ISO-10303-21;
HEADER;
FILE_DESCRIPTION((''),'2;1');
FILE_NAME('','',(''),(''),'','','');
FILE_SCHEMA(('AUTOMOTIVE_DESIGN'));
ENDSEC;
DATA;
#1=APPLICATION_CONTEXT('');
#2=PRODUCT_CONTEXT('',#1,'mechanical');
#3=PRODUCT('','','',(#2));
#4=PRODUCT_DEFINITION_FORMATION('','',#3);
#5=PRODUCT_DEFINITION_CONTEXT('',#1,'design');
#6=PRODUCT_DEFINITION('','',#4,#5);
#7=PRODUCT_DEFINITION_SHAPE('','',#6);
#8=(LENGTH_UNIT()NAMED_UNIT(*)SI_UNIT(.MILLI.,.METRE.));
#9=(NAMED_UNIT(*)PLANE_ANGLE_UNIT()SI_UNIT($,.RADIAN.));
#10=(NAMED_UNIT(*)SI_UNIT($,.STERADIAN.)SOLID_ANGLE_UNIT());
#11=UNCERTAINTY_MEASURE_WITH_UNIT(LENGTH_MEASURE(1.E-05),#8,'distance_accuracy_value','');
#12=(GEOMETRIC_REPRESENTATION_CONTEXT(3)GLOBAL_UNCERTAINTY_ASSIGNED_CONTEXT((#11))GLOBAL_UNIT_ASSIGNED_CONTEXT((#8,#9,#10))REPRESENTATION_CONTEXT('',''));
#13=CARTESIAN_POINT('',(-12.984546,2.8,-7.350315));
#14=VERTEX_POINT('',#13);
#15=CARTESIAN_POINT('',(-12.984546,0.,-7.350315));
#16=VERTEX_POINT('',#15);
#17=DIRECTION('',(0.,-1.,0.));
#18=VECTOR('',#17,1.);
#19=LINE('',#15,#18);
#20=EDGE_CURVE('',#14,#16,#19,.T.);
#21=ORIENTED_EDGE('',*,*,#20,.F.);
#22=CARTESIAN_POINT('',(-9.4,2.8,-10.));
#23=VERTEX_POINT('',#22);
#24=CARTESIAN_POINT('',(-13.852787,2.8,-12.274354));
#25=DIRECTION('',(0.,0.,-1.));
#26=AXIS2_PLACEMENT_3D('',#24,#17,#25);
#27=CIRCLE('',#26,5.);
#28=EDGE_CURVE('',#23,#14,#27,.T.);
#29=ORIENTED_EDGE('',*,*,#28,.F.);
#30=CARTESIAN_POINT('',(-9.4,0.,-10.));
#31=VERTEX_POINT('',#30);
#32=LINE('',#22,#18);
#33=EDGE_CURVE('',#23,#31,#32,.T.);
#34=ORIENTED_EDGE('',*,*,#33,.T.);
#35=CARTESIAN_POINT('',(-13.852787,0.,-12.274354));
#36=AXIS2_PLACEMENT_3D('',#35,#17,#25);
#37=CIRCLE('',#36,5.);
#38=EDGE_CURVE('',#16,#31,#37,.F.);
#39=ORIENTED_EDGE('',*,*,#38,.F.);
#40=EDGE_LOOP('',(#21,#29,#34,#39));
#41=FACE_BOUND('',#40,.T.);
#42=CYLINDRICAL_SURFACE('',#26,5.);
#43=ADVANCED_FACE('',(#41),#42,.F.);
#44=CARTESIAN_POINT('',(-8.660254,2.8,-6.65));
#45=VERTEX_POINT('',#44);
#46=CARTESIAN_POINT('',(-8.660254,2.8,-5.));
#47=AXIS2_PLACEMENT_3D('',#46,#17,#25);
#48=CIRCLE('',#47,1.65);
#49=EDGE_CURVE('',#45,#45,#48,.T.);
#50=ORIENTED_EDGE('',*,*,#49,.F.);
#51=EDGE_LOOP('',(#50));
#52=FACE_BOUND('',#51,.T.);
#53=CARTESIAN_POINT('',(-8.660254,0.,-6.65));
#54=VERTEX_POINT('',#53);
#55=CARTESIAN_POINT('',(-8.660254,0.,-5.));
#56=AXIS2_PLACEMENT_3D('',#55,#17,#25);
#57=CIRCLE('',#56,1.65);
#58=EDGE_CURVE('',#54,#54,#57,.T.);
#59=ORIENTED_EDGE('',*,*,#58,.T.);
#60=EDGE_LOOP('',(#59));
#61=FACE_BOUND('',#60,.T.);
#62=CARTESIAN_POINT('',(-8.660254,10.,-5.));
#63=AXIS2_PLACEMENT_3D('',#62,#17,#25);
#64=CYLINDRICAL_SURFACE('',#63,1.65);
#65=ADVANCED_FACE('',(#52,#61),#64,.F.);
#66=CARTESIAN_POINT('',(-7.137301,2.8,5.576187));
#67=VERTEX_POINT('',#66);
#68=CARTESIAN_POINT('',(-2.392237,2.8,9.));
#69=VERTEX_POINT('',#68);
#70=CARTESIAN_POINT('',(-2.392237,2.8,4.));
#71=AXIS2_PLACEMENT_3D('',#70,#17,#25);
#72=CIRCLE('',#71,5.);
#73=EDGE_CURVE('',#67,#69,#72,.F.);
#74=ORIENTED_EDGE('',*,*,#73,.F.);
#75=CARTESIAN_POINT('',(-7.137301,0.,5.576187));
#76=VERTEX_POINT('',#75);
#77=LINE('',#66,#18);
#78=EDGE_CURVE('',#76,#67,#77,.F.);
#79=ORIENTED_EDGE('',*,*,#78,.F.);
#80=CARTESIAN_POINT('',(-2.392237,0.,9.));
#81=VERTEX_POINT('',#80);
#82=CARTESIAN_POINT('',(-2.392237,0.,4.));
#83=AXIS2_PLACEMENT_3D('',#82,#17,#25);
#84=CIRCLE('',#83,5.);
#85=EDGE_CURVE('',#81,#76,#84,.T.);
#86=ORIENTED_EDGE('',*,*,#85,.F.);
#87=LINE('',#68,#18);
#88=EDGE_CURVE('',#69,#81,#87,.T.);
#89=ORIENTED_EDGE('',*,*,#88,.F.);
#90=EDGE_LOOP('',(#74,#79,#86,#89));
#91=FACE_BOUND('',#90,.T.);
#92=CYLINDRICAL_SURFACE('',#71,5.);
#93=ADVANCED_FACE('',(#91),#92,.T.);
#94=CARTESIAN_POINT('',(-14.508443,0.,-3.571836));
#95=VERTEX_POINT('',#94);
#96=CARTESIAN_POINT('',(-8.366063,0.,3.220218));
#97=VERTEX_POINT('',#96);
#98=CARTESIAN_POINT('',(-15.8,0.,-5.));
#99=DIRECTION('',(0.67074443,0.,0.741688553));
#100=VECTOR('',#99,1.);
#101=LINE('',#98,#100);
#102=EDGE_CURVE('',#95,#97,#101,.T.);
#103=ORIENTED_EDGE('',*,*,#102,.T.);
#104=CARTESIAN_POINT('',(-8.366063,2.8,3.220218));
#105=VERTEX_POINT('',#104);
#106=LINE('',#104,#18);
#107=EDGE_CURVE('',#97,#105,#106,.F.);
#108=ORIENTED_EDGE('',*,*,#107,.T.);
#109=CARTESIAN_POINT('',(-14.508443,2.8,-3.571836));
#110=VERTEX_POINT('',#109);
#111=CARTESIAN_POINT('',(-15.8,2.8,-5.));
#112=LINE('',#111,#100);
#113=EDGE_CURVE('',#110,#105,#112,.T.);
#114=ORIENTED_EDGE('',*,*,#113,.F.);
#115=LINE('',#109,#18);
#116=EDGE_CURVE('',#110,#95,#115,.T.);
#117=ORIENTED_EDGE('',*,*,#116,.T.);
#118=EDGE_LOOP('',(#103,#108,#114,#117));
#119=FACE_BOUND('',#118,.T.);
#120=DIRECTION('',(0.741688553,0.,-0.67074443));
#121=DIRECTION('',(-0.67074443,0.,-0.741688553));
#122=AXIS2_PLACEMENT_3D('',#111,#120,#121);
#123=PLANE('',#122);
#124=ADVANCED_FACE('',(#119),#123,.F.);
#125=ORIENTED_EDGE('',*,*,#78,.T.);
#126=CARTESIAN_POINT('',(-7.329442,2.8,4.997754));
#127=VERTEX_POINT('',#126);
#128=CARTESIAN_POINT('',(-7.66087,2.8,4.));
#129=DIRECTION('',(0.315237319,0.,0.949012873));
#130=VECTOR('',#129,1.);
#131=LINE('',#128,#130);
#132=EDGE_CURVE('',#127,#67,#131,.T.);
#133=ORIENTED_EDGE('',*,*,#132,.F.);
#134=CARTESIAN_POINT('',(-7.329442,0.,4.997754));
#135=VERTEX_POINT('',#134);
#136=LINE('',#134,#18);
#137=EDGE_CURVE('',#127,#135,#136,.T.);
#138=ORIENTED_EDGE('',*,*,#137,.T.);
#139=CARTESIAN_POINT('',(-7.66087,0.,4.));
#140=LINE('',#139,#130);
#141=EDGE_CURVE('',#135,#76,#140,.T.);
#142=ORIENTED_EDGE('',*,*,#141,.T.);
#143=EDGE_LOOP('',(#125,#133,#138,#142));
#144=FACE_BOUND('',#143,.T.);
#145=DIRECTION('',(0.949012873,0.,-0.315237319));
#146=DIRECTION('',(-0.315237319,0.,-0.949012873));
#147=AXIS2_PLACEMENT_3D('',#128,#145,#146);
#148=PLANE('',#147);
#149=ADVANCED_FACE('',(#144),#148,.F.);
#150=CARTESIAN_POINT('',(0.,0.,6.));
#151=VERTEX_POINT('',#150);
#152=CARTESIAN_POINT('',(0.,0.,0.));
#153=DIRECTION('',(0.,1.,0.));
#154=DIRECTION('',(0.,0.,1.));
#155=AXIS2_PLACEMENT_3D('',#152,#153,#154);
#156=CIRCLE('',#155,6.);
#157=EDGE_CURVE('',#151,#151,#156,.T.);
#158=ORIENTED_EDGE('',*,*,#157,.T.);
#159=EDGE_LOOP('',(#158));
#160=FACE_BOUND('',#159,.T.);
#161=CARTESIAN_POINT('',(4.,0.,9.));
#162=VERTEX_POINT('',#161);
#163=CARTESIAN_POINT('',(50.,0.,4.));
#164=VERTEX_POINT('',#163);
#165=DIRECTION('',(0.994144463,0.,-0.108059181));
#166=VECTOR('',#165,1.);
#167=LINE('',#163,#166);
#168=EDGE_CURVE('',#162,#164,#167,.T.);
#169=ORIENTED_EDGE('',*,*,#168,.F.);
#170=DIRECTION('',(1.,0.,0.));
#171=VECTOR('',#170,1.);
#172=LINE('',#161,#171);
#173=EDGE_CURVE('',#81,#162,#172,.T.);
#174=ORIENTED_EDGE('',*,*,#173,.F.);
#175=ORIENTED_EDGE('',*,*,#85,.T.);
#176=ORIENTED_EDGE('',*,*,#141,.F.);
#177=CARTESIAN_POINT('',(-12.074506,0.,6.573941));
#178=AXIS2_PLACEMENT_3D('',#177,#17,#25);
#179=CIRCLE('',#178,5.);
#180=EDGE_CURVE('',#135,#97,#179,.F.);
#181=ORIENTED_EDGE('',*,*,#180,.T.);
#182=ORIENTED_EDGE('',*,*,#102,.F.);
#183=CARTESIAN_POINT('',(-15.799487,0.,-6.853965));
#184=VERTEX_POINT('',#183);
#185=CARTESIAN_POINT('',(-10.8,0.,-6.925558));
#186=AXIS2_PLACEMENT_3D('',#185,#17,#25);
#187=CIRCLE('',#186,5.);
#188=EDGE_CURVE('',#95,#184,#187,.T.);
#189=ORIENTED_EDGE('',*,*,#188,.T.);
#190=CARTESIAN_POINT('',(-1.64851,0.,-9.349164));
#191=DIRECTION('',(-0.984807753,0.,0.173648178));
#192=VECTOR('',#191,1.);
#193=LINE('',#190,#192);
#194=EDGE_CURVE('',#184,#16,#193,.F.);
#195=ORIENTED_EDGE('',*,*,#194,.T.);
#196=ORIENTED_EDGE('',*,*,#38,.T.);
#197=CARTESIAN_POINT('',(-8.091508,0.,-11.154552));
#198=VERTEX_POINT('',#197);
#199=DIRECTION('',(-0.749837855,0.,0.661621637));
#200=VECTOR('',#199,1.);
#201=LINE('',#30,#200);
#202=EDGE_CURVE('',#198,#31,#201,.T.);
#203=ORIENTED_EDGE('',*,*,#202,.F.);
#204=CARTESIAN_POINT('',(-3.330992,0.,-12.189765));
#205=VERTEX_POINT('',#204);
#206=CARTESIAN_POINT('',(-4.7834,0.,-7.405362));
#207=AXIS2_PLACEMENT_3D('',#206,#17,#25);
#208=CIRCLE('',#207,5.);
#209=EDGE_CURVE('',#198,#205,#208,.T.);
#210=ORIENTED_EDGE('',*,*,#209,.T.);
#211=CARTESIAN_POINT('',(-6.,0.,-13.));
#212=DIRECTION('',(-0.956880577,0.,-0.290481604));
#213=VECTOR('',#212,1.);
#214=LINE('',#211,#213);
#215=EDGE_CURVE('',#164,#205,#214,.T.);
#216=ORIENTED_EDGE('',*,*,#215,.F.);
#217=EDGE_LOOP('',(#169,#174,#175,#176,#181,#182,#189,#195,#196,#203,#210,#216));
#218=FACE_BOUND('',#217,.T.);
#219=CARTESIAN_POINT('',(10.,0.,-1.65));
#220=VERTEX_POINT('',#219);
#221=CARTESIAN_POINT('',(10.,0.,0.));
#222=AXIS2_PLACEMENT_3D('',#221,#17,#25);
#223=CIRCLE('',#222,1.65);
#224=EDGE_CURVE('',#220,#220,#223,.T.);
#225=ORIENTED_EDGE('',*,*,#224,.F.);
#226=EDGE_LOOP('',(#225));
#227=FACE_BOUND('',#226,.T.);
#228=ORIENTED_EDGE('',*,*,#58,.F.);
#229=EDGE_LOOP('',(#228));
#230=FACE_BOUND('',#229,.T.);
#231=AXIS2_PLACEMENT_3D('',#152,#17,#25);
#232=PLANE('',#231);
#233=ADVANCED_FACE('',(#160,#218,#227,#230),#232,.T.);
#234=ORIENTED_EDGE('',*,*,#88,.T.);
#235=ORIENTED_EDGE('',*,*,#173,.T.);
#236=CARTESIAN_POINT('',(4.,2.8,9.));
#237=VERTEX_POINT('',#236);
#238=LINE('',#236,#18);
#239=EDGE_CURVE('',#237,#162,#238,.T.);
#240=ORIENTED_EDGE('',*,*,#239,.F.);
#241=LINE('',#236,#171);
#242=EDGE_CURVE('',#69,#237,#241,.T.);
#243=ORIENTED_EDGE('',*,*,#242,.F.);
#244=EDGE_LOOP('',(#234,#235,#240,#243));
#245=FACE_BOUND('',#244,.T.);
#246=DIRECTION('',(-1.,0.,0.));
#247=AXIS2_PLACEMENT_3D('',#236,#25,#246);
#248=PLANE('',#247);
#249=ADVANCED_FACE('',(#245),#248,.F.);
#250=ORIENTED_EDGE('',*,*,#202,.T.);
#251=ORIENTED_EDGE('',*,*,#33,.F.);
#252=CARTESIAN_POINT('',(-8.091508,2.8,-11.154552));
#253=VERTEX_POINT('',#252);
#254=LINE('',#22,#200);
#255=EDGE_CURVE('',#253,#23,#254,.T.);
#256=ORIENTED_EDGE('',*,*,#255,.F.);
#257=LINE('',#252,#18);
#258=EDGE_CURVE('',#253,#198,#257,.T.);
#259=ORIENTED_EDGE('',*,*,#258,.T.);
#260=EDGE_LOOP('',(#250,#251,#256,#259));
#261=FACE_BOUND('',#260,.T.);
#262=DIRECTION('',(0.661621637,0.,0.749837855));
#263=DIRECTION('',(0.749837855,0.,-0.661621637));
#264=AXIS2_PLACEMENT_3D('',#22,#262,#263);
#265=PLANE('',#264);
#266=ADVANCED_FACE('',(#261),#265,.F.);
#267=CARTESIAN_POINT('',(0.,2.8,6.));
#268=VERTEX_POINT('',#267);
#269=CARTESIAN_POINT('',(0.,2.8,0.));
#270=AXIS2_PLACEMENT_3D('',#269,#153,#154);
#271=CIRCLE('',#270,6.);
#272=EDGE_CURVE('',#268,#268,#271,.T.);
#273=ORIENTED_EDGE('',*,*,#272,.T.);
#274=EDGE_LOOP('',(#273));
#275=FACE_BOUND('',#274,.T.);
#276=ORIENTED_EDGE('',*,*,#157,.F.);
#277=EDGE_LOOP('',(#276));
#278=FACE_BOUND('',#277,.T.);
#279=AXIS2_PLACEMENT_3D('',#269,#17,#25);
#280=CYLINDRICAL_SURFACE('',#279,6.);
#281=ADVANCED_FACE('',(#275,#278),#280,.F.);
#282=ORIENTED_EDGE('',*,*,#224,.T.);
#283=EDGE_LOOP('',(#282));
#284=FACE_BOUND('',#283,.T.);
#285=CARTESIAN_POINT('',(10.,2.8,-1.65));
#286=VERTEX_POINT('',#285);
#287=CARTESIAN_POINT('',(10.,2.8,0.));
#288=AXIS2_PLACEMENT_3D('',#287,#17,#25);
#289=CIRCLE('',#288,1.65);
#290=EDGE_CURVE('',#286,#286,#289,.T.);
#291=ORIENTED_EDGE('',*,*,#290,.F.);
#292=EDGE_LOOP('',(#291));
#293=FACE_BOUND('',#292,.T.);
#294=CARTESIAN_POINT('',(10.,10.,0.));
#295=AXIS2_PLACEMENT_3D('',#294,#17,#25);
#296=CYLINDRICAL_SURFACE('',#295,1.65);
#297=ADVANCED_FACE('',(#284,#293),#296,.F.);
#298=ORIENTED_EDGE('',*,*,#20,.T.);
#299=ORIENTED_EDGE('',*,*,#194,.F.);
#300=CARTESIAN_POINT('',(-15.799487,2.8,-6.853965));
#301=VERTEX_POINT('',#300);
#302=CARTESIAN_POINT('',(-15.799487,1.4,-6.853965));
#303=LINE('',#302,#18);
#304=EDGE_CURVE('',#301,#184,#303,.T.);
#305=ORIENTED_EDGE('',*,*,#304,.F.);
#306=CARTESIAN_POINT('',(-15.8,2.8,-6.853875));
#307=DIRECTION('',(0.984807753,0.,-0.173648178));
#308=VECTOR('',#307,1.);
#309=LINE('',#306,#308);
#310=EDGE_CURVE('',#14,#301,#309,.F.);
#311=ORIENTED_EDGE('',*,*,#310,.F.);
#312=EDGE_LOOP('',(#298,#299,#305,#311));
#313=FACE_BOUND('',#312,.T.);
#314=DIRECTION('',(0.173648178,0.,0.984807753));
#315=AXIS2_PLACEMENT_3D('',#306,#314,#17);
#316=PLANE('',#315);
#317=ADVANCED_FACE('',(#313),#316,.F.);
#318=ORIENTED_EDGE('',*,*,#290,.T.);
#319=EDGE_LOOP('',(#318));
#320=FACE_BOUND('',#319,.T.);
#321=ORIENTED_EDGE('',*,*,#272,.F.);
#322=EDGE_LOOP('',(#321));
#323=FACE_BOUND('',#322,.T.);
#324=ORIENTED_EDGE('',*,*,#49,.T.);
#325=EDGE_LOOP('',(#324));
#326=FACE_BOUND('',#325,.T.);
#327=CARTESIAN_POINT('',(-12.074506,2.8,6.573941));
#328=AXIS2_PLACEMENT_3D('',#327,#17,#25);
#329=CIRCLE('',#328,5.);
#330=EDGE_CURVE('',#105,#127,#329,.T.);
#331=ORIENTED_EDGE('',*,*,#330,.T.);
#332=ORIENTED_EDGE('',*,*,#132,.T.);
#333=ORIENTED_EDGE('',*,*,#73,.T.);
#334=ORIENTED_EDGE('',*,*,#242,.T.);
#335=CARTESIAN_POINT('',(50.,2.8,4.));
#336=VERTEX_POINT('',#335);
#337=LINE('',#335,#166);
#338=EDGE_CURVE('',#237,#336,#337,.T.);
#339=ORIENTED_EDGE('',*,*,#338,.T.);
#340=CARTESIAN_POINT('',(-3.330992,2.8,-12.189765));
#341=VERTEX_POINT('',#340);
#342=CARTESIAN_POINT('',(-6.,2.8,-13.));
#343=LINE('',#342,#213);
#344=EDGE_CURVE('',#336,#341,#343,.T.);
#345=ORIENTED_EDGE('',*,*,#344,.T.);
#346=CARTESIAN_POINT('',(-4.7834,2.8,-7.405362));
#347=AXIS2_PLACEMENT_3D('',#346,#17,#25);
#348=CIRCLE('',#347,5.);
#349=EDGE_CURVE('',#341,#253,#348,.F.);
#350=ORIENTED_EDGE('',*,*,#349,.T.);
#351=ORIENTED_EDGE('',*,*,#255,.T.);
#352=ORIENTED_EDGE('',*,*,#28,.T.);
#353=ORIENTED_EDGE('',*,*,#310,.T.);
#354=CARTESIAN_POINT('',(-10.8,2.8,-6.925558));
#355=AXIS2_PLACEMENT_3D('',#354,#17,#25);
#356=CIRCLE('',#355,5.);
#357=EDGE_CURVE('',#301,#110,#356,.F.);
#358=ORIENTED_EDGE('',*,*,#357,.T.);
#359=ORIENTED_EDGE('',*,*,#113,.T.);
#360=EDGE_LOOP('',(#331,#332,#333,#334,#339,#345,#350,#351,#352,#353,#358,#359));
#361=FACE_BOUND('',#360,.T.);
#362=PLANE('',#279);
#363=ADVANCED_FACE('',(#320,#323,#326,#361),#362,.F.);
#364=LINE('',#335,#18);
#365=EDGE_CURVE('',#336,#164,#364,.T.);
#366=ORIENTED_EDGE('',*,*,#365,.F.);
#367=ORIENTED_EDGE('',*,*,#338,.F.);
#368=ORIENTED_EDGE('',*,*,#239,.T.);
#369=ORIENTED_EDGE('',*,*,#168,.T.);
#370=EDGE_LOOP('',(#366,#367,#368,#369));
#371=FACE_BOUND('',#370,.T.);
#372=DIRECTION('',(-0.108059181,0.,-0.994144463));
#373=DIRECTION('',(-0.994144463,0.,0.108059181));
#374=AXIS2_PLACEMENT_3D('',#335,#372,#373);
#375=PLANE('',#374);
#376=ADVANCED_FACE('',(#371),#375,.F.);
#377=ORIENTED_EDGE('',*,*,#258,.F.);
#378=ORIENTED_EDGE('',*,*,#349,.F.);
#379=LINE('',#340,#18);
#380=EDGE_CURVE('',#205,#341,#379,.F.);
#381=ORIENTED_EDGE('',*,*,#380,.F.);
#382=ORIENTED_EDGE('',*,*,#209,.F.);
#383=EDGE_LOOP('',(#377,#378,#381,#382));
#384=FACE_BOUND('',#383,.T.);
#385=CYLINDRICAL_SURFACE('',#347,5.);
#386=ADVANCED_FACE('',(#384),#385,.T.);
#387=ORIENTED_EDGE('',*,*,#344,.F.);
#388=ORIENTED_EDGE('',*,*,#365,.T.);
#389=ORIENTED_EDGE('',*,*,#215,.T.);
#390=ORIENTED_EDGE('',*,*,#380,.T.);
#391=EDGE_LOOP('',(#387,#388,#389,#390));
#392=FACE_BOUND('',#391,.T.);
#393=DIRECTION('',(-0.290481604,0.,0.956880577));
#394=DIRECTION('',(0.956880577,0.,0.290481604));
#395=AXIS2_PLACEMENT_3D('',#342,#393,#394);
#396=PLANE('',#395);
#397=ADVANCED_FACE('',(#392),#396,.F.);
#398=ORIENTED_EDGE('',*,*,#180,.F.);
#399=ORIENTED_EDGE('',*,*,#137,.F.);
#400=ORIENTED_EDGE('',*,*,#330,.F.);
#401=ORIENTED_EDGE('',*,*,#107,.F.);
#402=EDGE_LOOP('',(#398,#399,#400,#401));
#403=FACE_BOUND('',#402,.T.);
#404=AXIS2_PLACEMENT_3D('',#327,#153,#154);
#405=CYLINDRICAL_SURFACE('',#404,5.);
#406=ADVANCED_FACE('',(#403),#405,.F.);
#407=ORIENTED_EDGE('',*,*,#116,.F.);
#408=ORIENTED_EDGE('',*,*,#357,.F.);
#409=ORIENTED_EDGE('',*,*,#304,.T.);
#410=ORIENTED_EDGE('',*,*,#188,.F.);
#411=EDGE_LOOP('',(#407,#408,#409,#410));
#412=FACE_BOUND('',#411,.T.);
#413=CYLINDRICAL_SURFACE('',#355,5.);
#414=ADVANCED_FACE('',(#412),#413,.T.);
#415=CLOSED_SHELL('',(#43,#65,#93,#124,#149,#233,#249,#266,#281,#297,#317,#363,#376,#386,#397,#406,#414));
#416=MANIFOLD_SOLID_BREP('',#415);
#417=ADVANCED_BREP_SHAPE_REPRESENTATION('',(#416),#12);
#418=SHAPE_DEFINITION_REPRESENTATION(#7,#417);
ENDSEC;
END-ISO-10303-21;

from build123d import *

# Parameters (mm, degrees)
SKETCH1_R           = 6
BOSS_EXTRUDE3_DEPTH = 2.8
FILLET1_R           = 5
SKETCH5_R           = 1.65
CUT_EXTRUDE2_DEPTH  = 10
CHAMFER1_SIZE       = 6.5
CHAMFER1_SIZE_2     = 1.146125375
FILLET2_R           = 5


with BuildPart() as part:
    # Sketch1 → Boss-Extrude3 (new body)
    with BuildSketch(Plane(origin=(0, 0, 0), x_dir=(1, 0, 0), z_dir=(0, 1, 0))):
        Polygon((-9.4, 10), (-6, 13), (50, -4), (4, -9), (-6, -9), (-7.660869565, -4), (-15.8, 5), (-15.8, 8), (-9.4, 8), align=None)
        with Locations(Location((0, 0, 0), (0, 0, 270))):
            Circle(SKETCH1_R, mode=Mode.SUBTRACT)
    extrude(amount=BOSS_EXTRUDE3_DEPTH)

    # Fillet1
    fillet1_edges = [part.edges().sort_by_distance(p)[0] for p in [
        (-6, 1.4, -13),
        (-6, 1.4, 9),
        (-7.660869565, 1.4, 4),
        (-15.8, 1.4, -5),
    ]]
    fillet(fillet1_edges, radius=FILLET1_R)

    # Sketch5 → Cut-Extrude2 (cut)
    with BuildSketch(Plane.XZ):
        with Locations(Location((10, 0, 0), (0, 0, 270))):
            Circle(SKETCH5_R)
        with Locations(Location((-8.660254038, -5, 0), (0, 0, 270))):
            Circle(SKETCH5_R)
    extrude(amount=-CUT_EXTRUDE2_DEPTH, mode=Mode.SUBTRACT)

    # Chamfer1
    # the kernel refuses this chamfer: 6.5, 1.146125375 mm, written as the material it takes off along each edge
    with BuildSketch(Plane(origin=(-15.8, -16.890502177, -8), x_dir=(0.9999776716360547, 0, -0.006682531656101837), z_dir=(0, 1, 0))) as chamfer1_piece_1_section:
        Polygon((CHAMFER1_SIZE * 0.999977671636, -CHAMFER1_SIZE * 0.0066825316561), (-CHAMFER1_SIZE_2 * 0.0066825316538, -CHAMFER1_SIZE_2 * 0.999977671291), (0, 0), align=None)
    chamfer1_piece_1 = extrude(amount=36.581004353, mode=Mode.PRIVATE)
    chamfer1_piece_1 = split(chamfer1_piece_1, bisect_by=Plane(origin=(-9.4, 1.4, -7.685869002), z_dir=(-1, 0, 0)), keep=Keep.TOP, mode=Mode.PRIVATE)
    add(chamfer1_piece_1, mode=Mode.SUBTRACT)

    # Fillet2
    # the kernel refuses this fillet: 5 mm, written as the material it adds along each edge
    with BuildSketch(Plane(origin=(-9.4, 2.8, -7.982367302), x_dir=(-0.984807753012237, 0, 0.1736481776667665), z_dir=(0, -1, 0))) as fillet2_piece_1:
        with BuildLine():
            CenterArc((3.639843813, 5), FILLET2_R, 217.056619291, 52.943380709)
            Line((-0.350358241, 1.986980324), (-0.430162282, 1.92671993))
            ThreePointArc((-0.430162282, 1.92671993), (-0.273659896, 0.976125344), (-0.098480775, -0.017364818))
            Line((-0.098480775, -0.017364818), (0, -0.1))
            Line((0, -0.1), (3.639843813, -0.1))
            Line((3.639843813, -0.1), (3.639843813, 0))
        make_face()
    extrude(amount=2.8)


solid = part.part
